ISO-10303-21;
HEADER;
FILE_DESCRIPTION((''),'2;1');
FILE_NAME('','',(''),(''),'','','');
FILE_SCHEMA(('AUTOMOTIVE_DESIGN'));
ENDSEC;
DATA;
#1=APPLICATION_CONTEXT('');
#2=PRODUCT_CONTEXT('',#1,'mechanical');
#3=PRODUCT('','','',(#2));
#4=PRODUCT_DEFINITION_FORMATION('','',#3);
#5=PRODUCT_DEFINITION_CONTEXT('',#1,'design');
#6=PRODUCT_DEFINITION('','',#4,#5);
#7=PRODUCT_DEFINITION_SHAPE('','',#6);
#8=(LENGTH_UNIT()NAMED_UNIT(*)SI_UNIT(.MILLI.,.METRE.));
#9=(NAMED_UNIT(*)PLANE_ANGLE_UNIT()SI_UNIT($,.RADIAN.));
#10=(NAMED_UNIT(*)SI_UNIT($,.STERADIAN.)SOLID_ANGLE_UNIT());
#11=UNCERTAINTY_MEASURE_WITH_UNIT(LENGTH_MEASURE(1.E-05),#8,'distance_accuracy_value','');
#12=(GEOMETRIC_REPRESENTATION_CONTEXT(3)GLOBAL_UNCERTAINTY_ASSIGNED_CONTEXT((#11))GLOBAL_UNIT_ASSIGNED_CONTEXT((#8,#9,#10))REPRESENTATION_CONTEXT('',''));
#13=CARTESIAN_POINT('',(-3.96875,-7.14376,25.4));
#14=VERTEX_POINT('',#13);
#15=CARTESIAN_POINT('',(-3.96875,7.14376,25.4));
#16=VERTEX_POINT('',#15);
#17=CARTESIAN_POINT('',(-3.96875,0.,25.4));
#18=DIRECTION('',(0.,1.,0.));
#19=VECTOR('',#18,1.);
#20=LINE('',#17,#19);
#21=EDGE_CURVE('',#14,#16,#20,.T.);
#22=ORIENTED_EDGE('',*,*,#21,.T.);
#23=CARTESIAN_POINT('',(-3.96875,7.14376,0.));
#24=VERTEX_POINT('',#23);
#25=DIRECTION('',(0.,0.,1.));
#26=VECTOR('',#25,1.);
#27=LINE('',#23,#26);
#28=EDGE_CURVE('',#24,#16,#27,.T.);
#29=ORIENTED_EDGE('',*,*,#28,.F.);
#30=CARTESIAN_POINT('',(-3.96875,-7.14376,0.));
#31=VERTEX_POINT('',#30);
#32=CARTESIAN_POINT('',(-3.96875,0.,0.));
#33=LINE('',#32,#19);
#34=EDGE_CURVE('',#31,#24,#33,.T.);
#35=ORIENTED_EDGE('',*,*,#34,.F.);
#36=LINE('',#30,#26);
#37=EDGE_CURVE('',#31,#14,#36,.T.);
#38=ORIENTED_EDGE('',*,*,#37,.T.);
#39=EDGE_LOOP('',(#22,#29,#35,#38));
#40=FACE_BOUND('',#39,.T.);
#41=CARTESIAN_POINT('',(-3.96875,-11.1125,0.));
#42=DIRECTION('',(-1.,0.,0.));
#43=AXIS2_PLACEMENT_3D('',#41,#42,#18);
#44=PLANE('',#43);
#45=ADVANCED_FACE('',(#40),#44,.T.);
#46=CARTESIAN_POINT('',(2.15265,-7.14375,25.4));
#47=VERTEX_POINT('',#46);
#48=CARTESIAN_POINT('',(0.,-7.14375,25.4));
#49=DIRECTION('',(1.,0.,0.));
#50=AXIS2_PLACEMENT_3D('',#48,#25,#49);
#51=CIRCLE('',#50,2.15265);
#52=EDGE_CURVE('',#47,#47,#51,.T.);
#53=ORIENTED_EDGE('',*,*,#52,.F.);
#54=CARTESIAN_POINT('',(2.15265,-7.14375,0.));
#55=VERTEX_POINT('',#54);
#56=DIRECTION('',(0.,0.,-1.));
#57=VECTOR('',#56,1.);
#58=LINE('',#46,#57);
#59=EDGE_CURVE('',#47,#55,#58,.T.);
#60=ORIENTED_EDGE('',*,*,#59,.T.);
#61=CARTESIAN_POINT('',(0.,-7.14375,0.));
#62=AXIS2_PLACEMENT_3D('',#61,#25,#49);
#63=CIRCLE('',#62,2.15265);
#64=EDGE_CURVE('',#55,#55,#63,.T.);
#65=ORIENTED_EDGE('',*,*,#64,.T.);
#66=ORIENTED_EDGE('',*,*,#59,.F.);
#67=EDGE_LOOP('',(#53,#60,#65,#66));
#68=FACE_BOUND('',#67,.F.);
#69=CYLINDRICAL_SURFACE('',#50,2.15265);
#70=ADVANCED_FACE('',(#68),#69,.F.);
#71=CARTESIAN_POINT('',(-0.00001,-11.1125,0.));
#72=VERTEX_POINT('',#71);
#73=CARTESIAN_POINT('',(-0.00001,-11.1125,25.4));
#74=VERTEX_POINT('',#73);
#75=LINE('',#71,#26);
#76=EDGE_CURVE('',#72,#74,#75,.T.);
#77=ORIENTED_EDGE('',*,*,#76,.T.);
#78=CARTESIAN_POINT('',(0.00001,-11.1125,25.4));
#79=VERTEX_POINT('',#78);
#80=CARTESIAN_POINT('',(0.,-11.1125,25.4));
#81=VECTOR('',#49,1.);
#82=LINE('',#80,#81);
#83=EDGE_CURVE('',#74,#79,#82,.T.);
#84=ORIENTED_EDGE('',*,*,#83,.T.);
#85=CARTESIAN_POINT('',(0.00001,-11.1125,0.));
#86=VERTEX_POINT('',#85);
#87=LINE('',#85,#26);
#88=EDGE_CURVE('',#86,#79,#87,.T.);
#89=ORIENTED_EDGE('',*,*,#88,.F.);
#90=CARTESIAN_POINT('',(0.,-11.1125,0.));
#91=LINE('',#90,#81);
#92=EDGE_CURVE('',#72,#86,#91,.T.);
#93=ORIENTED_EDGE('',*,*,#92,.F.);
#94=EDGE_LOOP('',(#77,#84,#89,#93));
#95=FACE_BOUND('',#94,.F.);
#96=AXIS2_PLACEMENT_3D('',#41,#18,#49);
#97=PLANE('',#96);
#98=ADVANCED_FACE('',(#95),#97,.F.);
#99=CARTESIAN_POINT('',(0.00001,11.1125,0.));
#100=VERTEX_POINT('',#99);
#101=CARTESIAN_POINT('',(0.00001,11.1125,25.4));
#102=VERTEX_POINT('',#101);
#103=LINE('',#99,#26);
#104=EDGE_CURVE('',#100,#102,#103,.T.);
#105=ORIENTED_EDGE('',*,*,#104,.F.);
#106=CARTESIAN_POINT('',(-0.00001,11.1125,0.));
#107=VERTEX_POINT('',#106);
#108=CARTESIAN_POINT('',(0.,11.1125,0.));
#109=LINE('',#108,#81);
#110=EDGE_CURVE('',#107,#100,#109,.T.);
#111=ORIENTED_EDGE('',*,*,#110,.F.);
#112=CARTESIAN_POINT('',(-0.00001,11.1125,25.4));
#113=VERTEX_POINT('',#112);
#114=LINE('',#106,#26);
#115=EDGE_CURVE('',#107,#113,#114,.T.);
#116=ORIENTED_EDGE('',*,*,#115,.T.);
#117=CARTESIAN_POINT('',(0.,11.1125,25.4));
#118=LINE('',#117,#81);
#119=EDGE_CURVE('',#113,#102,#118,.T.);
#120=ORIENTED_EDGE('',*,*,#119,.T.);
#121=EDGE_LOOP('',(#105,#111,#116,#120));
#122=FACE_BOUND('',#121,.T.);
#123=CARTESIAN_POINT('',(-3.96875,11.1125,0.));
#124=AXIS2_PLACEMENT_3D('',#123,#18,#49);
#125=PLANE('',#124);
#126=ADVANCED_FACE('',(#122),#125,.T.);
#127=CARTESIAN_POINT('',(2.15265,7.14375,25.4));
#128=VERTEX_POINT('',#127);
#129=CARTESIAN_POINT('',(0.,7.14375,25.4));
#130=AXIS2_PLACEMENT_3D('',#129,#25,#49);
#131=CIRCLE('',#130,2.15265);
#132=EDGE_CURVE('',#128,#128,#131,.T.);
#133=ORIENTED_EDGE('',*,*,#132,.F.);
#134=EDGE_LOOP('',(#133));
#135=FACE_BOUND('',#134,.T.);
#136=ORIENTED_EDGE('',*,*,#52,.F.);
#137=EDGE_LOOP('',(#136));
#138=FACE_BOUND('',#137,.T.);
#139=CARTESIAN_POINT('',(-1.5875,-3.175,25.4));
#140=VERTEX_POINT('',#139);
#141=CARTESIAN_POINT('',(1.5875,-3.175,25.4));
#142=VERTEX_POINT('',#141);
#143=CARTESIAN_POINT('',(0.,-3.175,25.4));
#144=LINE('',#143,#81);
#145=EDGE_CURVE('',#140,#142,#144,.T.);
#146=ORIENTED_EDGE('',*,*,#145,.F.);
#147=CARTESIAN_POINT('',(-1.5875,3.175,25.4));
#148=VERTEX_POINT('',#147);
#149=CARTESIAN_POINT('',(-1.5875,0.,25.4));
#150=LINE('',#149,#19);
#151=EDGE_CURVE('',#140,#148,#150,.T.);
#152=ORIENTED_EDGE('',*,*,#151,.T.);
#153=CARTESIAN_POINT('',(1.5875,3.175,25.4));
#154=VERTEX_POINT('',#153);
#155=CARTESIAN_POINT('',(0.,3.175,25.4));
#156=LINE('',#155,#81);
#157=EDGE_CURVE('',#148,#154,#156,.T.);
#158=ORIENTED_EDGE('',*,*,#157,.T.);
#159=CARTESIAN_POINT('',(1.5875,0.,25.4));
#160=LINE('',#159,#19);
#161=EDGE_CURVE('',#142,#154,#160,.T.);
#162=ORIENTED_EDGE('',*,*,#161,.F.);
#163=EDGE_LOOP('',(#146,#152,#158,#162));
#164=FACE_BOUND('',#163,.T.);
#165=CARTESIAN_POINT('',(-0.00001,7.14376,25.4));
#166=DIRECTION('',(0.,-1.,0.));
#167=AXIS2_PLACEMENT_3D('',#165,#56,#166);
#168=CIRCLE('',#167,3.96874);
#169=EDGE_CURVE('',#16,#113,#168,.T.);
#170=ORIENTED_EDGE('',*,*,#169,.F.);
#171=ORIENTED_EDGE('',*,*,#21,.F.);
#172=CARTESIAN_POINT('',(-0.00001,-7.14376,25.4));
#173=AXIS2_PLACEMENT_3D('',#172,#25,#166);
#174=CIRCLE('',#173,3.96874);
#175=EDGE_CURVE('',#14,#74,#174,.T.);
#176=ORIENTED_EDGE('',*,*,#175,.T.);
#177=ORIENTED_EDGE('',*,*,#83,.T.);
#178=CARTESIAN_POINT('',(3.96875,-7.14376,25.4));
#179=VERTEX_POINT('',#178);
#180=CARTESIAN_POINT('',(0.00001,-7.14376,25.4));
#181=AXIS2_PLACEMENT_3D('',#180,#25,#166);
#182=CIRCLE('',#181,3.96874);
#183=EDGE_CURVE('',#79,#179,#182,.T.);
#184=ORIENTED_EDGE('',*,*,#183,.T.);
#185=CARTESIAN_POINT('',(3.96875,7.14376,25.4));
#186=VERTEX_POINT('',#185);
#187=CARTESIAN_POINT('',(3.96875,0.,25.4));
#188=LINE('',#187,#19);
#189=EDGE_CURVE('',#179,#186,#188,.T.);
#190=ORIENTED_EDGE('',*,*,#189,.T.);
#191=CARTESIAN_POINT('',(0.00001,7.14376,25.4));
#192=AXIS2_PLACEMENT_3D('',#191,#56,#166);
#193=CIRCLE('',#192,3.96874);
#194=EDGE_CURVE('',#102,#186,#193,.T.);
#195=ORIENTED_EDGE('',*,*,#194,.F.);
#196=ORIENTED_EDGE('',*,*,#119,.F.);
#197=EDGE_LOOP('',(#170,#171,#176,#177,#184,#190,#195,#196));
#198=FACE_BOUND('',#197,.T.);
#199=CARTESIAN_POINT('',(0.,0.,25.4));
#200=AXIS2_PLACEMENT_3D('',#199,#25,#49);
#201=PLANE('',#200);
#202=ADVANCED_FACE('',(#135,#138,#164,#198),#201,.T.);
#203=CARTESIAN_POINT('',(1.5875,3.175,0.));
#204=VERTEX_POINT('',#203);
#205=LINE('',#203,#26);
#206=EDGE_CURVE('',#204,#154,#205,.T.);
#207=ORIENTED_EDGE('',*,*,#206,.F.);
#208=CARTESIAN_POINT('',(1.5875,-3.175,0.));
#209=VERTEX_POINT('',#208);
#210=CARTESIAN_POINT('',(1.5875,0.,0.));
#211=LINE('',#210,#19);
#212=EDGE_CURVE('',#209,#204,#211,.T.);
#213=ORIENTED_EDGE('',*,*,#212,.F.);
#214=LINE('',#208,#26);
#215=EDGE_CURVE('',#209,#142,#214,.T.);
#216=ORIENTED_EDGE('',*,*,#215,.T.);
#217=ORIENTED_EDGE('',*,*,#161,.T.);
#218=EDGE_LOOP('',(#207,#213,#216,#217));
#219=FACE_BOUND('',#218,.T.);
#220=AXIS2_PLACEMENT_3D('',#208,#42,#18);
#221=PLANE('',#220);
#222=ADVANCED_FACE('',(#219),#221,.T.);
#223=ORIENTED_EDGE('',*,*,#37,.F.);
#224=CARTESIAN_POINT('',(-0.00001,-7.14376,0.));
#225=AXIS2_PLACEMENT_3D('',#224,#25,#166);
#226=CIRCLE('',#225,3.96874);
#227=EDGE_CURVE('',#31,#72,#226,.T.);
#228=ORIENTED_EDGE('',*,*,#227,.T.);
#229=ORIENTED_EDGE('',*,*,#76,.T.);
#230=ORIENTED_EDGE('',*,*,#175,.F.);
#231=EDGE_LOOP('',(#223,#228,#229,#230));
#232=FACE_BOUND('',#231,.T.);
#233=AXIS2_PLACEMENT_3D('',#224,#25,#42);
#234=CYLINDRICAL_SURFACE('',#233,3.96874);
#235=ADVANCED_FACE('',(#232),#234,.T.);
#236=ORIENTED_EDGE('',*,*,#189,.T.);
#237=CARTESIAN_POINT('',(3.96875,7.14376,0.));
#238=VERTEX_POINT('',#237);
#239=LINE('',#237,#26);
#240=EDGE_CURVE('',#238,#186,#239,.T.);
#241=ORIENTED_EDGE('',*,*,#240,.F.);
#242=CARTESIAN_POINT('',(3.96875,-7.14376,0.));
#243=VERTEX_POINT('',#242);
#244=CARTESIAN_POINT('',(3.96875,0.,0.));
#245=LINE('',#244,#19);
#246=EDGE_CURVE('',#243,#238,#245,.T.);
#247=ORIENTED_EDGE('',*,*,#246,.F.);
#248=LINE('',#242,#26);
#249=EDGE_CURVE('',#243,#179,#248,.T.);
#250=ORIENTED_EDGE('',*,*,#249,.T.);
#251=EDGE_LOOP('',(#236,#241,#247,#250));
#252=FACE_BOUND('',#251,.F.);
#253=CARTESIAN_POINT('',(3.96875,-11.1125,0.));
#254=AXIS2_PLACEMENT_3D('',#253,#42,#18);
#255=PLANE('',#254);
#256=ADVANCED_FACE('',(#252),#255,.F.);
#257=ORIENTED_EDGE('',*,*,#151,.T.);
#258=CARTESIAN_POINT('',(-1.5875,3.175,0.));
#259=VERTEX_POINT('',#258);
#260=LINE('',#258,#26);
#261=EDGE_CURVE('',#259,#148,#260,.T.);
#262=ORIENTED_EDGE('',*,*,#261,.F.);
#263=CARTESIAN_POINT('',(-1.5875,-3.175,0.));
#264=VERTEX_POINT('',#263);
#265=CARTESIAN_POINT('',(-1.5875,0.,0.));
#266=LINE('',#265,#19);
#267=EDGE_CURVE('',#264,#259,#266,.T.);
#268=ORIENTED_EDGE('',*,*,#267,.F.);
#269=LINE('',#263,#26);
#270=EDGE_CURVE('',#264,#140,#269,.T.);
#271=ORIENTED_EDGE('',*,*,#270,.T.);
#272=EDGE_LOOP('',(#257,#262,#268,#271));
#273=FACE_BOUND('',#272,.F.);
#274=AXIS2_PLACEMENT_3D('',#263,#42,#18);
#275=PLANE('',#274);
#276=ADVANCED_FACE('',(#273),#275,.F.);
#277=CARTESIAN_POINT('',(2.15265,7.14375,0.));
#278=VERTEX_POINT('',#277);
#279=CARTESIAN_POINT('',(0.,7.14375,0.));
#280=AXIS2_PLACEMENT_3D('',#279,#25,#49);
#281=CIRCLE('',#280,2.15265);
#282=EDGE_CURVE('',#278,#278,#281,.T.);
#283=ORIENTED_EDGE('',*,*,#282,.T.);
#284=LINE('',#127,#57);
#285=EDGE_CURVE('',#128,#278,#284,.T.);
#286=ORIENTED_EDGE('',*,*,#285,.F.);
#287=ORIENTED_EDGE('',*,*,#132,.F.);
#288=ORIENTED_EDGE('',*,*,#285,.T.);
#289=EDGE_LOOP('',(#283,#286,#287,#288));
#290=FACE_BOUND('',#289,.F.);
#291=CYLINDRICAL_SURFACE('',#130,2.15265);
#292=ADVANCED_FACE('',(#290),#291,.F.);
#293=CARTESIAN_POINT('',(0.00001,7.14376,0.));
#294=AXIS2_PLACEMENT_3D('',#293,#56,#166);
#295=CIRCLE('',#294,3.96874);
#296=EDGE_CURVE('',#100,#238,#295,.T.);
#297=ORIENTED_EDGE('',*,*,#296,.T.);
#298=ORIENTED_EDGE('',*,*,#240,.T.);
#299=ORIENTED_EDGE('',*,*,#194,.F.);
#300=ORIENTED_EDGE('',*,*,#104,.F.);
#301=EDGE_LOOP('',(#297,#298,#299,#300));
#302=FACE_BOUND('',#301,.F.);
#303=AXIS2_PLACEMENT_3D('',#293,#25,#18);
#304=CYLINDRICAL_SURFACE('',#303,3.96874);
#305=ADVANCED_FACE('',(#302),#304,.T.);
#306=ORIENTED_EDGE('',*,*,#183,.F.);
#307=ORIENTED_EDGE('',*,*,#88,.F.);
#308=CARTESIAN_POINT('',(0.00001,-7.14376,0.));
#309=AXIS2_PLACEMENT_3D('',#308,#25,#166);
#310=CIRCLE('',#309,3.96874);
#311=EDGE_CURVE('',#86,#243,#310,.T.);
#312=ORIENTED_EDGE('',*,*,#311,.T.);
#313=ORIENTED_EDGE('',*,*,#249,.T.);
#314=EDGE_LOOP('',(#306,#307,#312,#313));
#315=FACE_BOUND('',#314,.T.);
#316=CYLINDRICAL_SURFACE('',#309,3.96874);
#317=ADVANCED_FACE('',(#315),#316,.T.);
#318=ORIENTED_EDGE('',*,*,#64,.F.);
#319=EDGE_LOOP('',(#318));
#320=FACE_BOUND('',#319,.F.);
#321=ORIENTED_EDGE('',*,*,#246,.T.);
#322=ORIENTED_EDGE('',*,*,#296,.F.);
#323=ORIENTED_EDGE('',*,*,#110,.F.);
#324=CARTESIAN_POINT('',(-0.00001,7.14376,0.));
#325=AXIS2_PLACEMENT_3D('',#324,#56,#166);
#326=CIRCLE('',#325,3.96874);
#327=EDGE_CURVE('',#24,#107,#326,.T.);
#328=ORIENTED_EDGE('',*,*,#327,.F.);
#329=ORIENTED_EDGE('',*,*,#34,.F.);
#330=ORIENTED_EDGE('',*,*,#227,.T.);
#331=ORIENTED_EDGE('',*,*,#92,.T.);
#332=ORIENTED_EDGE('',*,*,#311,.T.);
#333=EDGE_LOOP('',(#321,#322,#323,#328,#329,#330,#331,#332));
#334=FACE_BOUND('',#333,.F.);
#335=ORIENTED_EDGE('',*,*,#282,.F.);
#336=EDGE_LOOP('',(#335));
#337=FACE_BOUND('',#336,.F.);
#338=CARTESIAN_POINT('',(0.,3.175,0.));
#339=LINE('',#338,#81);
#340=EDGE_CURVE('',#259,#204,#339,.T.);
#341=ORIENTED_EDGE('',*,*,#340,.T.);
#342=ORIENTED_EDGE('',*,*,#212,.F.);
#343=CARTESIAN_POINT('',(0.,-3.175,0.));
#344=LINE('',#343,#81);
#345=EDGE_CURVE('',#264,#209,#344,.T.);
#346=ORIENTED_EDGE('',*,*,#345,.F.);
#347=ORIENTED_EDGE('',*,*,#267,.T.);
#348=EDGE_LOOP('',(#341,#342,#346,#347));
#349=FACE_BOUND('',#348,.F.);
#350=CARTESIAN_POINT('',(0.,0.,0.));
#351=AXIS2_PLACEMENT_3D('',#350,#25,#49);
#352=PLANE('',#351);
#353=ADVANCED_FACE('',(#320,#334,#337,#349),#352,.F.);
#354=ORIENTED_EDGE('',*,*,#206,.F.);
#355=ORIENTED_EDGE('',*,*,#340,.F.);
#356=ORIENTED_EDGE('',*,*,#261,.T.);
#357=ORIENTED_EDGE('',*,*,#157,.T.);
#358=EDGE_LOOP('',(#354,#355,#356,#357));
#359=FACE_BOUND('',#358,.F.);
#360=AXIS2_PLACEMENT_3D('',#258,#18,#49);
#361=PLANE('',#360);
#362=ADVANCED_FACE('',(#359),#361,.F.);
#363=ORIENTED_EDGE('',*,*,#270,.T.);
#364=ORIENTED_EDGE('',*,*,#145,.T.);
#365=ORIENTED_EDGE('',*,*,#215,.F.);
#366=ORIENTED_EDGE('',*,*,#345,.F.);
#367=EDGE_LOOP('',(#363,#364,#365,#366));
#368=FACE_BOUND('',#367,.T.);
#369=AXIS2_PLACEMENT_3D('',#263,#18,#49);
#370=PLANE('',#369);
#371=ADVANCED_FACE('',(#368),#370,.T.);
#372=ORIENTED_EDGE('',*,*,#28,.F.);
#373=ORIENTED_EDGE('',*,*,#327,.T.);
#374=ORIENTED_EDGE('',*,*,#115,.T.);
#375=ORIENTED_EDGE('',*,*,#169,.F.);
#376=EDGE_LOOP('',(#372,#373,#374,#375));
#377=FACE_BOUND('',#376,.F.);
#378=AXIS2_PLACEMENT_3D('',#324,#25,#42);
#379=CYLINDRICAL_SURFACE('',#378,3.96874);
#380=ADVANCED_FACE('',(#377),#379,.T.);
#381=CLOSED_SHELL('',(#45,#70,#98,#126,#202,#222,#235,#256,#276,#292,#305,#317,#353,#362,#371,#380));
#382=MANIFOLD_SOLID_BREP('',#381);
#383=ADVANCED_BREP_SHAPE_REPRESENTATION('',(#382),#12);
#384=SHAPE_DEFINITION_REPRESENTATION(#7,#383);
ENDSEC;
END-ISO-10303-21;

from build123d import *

# Parameters (mm, degrees)
F0_W     = 7.9375
F0_H     = 22.225
F0_W_2   = 3.175
F0_H_2   = 6.35
F1_DEPTH = 25.4
F2_R     = 2.15265
F3_DEPTH = 25.4
F4_R     = 3.96874


# Not quite as in the source:
# - a fillet or chamfer is up to 0.001 mm smaller than in the source, because OpenCascade refuses the exact size


with BuildPart() as f1:
    # F0 (on Top) → F1 (new body)
    with BuildSketch(Plane.XY):
        Rectangle(F0_W, F0_H)
        Rectangle(F0_W_2, F0_H_2, mode=Mode.SUBTRACT)
    extrude(amount=F1_DEPTH)

    # F2 (on face) → F3 (cut, through all)
    with BuildSketch(Plane.XY.offset(25.4)):
        with Locations((0, 7.14375)):
            Circle(F2_R)
        with Locations((0, -7.14375)):
            Circle(F2_R)
    extrude(amount=-F3_DEPTH, mode=Mode.SUBTRACT)

    # F4 (radius 3.96875 in the source; OpenCascade refuses exactly that, so slightly less here)
    f4_edges = [f1.edges().sort_by_distance(p)[0] for p in [
        (-3.96875, -11.1125, 12.7),
        (3.96875, -11.1125, 12.7),
        (3.96875, 11.1125, 12.7),
        (-3.96875, 11.1125, 12.7),
    ]]
    fillet(f4_edges, radius=F4_R)


solid = f1.part
